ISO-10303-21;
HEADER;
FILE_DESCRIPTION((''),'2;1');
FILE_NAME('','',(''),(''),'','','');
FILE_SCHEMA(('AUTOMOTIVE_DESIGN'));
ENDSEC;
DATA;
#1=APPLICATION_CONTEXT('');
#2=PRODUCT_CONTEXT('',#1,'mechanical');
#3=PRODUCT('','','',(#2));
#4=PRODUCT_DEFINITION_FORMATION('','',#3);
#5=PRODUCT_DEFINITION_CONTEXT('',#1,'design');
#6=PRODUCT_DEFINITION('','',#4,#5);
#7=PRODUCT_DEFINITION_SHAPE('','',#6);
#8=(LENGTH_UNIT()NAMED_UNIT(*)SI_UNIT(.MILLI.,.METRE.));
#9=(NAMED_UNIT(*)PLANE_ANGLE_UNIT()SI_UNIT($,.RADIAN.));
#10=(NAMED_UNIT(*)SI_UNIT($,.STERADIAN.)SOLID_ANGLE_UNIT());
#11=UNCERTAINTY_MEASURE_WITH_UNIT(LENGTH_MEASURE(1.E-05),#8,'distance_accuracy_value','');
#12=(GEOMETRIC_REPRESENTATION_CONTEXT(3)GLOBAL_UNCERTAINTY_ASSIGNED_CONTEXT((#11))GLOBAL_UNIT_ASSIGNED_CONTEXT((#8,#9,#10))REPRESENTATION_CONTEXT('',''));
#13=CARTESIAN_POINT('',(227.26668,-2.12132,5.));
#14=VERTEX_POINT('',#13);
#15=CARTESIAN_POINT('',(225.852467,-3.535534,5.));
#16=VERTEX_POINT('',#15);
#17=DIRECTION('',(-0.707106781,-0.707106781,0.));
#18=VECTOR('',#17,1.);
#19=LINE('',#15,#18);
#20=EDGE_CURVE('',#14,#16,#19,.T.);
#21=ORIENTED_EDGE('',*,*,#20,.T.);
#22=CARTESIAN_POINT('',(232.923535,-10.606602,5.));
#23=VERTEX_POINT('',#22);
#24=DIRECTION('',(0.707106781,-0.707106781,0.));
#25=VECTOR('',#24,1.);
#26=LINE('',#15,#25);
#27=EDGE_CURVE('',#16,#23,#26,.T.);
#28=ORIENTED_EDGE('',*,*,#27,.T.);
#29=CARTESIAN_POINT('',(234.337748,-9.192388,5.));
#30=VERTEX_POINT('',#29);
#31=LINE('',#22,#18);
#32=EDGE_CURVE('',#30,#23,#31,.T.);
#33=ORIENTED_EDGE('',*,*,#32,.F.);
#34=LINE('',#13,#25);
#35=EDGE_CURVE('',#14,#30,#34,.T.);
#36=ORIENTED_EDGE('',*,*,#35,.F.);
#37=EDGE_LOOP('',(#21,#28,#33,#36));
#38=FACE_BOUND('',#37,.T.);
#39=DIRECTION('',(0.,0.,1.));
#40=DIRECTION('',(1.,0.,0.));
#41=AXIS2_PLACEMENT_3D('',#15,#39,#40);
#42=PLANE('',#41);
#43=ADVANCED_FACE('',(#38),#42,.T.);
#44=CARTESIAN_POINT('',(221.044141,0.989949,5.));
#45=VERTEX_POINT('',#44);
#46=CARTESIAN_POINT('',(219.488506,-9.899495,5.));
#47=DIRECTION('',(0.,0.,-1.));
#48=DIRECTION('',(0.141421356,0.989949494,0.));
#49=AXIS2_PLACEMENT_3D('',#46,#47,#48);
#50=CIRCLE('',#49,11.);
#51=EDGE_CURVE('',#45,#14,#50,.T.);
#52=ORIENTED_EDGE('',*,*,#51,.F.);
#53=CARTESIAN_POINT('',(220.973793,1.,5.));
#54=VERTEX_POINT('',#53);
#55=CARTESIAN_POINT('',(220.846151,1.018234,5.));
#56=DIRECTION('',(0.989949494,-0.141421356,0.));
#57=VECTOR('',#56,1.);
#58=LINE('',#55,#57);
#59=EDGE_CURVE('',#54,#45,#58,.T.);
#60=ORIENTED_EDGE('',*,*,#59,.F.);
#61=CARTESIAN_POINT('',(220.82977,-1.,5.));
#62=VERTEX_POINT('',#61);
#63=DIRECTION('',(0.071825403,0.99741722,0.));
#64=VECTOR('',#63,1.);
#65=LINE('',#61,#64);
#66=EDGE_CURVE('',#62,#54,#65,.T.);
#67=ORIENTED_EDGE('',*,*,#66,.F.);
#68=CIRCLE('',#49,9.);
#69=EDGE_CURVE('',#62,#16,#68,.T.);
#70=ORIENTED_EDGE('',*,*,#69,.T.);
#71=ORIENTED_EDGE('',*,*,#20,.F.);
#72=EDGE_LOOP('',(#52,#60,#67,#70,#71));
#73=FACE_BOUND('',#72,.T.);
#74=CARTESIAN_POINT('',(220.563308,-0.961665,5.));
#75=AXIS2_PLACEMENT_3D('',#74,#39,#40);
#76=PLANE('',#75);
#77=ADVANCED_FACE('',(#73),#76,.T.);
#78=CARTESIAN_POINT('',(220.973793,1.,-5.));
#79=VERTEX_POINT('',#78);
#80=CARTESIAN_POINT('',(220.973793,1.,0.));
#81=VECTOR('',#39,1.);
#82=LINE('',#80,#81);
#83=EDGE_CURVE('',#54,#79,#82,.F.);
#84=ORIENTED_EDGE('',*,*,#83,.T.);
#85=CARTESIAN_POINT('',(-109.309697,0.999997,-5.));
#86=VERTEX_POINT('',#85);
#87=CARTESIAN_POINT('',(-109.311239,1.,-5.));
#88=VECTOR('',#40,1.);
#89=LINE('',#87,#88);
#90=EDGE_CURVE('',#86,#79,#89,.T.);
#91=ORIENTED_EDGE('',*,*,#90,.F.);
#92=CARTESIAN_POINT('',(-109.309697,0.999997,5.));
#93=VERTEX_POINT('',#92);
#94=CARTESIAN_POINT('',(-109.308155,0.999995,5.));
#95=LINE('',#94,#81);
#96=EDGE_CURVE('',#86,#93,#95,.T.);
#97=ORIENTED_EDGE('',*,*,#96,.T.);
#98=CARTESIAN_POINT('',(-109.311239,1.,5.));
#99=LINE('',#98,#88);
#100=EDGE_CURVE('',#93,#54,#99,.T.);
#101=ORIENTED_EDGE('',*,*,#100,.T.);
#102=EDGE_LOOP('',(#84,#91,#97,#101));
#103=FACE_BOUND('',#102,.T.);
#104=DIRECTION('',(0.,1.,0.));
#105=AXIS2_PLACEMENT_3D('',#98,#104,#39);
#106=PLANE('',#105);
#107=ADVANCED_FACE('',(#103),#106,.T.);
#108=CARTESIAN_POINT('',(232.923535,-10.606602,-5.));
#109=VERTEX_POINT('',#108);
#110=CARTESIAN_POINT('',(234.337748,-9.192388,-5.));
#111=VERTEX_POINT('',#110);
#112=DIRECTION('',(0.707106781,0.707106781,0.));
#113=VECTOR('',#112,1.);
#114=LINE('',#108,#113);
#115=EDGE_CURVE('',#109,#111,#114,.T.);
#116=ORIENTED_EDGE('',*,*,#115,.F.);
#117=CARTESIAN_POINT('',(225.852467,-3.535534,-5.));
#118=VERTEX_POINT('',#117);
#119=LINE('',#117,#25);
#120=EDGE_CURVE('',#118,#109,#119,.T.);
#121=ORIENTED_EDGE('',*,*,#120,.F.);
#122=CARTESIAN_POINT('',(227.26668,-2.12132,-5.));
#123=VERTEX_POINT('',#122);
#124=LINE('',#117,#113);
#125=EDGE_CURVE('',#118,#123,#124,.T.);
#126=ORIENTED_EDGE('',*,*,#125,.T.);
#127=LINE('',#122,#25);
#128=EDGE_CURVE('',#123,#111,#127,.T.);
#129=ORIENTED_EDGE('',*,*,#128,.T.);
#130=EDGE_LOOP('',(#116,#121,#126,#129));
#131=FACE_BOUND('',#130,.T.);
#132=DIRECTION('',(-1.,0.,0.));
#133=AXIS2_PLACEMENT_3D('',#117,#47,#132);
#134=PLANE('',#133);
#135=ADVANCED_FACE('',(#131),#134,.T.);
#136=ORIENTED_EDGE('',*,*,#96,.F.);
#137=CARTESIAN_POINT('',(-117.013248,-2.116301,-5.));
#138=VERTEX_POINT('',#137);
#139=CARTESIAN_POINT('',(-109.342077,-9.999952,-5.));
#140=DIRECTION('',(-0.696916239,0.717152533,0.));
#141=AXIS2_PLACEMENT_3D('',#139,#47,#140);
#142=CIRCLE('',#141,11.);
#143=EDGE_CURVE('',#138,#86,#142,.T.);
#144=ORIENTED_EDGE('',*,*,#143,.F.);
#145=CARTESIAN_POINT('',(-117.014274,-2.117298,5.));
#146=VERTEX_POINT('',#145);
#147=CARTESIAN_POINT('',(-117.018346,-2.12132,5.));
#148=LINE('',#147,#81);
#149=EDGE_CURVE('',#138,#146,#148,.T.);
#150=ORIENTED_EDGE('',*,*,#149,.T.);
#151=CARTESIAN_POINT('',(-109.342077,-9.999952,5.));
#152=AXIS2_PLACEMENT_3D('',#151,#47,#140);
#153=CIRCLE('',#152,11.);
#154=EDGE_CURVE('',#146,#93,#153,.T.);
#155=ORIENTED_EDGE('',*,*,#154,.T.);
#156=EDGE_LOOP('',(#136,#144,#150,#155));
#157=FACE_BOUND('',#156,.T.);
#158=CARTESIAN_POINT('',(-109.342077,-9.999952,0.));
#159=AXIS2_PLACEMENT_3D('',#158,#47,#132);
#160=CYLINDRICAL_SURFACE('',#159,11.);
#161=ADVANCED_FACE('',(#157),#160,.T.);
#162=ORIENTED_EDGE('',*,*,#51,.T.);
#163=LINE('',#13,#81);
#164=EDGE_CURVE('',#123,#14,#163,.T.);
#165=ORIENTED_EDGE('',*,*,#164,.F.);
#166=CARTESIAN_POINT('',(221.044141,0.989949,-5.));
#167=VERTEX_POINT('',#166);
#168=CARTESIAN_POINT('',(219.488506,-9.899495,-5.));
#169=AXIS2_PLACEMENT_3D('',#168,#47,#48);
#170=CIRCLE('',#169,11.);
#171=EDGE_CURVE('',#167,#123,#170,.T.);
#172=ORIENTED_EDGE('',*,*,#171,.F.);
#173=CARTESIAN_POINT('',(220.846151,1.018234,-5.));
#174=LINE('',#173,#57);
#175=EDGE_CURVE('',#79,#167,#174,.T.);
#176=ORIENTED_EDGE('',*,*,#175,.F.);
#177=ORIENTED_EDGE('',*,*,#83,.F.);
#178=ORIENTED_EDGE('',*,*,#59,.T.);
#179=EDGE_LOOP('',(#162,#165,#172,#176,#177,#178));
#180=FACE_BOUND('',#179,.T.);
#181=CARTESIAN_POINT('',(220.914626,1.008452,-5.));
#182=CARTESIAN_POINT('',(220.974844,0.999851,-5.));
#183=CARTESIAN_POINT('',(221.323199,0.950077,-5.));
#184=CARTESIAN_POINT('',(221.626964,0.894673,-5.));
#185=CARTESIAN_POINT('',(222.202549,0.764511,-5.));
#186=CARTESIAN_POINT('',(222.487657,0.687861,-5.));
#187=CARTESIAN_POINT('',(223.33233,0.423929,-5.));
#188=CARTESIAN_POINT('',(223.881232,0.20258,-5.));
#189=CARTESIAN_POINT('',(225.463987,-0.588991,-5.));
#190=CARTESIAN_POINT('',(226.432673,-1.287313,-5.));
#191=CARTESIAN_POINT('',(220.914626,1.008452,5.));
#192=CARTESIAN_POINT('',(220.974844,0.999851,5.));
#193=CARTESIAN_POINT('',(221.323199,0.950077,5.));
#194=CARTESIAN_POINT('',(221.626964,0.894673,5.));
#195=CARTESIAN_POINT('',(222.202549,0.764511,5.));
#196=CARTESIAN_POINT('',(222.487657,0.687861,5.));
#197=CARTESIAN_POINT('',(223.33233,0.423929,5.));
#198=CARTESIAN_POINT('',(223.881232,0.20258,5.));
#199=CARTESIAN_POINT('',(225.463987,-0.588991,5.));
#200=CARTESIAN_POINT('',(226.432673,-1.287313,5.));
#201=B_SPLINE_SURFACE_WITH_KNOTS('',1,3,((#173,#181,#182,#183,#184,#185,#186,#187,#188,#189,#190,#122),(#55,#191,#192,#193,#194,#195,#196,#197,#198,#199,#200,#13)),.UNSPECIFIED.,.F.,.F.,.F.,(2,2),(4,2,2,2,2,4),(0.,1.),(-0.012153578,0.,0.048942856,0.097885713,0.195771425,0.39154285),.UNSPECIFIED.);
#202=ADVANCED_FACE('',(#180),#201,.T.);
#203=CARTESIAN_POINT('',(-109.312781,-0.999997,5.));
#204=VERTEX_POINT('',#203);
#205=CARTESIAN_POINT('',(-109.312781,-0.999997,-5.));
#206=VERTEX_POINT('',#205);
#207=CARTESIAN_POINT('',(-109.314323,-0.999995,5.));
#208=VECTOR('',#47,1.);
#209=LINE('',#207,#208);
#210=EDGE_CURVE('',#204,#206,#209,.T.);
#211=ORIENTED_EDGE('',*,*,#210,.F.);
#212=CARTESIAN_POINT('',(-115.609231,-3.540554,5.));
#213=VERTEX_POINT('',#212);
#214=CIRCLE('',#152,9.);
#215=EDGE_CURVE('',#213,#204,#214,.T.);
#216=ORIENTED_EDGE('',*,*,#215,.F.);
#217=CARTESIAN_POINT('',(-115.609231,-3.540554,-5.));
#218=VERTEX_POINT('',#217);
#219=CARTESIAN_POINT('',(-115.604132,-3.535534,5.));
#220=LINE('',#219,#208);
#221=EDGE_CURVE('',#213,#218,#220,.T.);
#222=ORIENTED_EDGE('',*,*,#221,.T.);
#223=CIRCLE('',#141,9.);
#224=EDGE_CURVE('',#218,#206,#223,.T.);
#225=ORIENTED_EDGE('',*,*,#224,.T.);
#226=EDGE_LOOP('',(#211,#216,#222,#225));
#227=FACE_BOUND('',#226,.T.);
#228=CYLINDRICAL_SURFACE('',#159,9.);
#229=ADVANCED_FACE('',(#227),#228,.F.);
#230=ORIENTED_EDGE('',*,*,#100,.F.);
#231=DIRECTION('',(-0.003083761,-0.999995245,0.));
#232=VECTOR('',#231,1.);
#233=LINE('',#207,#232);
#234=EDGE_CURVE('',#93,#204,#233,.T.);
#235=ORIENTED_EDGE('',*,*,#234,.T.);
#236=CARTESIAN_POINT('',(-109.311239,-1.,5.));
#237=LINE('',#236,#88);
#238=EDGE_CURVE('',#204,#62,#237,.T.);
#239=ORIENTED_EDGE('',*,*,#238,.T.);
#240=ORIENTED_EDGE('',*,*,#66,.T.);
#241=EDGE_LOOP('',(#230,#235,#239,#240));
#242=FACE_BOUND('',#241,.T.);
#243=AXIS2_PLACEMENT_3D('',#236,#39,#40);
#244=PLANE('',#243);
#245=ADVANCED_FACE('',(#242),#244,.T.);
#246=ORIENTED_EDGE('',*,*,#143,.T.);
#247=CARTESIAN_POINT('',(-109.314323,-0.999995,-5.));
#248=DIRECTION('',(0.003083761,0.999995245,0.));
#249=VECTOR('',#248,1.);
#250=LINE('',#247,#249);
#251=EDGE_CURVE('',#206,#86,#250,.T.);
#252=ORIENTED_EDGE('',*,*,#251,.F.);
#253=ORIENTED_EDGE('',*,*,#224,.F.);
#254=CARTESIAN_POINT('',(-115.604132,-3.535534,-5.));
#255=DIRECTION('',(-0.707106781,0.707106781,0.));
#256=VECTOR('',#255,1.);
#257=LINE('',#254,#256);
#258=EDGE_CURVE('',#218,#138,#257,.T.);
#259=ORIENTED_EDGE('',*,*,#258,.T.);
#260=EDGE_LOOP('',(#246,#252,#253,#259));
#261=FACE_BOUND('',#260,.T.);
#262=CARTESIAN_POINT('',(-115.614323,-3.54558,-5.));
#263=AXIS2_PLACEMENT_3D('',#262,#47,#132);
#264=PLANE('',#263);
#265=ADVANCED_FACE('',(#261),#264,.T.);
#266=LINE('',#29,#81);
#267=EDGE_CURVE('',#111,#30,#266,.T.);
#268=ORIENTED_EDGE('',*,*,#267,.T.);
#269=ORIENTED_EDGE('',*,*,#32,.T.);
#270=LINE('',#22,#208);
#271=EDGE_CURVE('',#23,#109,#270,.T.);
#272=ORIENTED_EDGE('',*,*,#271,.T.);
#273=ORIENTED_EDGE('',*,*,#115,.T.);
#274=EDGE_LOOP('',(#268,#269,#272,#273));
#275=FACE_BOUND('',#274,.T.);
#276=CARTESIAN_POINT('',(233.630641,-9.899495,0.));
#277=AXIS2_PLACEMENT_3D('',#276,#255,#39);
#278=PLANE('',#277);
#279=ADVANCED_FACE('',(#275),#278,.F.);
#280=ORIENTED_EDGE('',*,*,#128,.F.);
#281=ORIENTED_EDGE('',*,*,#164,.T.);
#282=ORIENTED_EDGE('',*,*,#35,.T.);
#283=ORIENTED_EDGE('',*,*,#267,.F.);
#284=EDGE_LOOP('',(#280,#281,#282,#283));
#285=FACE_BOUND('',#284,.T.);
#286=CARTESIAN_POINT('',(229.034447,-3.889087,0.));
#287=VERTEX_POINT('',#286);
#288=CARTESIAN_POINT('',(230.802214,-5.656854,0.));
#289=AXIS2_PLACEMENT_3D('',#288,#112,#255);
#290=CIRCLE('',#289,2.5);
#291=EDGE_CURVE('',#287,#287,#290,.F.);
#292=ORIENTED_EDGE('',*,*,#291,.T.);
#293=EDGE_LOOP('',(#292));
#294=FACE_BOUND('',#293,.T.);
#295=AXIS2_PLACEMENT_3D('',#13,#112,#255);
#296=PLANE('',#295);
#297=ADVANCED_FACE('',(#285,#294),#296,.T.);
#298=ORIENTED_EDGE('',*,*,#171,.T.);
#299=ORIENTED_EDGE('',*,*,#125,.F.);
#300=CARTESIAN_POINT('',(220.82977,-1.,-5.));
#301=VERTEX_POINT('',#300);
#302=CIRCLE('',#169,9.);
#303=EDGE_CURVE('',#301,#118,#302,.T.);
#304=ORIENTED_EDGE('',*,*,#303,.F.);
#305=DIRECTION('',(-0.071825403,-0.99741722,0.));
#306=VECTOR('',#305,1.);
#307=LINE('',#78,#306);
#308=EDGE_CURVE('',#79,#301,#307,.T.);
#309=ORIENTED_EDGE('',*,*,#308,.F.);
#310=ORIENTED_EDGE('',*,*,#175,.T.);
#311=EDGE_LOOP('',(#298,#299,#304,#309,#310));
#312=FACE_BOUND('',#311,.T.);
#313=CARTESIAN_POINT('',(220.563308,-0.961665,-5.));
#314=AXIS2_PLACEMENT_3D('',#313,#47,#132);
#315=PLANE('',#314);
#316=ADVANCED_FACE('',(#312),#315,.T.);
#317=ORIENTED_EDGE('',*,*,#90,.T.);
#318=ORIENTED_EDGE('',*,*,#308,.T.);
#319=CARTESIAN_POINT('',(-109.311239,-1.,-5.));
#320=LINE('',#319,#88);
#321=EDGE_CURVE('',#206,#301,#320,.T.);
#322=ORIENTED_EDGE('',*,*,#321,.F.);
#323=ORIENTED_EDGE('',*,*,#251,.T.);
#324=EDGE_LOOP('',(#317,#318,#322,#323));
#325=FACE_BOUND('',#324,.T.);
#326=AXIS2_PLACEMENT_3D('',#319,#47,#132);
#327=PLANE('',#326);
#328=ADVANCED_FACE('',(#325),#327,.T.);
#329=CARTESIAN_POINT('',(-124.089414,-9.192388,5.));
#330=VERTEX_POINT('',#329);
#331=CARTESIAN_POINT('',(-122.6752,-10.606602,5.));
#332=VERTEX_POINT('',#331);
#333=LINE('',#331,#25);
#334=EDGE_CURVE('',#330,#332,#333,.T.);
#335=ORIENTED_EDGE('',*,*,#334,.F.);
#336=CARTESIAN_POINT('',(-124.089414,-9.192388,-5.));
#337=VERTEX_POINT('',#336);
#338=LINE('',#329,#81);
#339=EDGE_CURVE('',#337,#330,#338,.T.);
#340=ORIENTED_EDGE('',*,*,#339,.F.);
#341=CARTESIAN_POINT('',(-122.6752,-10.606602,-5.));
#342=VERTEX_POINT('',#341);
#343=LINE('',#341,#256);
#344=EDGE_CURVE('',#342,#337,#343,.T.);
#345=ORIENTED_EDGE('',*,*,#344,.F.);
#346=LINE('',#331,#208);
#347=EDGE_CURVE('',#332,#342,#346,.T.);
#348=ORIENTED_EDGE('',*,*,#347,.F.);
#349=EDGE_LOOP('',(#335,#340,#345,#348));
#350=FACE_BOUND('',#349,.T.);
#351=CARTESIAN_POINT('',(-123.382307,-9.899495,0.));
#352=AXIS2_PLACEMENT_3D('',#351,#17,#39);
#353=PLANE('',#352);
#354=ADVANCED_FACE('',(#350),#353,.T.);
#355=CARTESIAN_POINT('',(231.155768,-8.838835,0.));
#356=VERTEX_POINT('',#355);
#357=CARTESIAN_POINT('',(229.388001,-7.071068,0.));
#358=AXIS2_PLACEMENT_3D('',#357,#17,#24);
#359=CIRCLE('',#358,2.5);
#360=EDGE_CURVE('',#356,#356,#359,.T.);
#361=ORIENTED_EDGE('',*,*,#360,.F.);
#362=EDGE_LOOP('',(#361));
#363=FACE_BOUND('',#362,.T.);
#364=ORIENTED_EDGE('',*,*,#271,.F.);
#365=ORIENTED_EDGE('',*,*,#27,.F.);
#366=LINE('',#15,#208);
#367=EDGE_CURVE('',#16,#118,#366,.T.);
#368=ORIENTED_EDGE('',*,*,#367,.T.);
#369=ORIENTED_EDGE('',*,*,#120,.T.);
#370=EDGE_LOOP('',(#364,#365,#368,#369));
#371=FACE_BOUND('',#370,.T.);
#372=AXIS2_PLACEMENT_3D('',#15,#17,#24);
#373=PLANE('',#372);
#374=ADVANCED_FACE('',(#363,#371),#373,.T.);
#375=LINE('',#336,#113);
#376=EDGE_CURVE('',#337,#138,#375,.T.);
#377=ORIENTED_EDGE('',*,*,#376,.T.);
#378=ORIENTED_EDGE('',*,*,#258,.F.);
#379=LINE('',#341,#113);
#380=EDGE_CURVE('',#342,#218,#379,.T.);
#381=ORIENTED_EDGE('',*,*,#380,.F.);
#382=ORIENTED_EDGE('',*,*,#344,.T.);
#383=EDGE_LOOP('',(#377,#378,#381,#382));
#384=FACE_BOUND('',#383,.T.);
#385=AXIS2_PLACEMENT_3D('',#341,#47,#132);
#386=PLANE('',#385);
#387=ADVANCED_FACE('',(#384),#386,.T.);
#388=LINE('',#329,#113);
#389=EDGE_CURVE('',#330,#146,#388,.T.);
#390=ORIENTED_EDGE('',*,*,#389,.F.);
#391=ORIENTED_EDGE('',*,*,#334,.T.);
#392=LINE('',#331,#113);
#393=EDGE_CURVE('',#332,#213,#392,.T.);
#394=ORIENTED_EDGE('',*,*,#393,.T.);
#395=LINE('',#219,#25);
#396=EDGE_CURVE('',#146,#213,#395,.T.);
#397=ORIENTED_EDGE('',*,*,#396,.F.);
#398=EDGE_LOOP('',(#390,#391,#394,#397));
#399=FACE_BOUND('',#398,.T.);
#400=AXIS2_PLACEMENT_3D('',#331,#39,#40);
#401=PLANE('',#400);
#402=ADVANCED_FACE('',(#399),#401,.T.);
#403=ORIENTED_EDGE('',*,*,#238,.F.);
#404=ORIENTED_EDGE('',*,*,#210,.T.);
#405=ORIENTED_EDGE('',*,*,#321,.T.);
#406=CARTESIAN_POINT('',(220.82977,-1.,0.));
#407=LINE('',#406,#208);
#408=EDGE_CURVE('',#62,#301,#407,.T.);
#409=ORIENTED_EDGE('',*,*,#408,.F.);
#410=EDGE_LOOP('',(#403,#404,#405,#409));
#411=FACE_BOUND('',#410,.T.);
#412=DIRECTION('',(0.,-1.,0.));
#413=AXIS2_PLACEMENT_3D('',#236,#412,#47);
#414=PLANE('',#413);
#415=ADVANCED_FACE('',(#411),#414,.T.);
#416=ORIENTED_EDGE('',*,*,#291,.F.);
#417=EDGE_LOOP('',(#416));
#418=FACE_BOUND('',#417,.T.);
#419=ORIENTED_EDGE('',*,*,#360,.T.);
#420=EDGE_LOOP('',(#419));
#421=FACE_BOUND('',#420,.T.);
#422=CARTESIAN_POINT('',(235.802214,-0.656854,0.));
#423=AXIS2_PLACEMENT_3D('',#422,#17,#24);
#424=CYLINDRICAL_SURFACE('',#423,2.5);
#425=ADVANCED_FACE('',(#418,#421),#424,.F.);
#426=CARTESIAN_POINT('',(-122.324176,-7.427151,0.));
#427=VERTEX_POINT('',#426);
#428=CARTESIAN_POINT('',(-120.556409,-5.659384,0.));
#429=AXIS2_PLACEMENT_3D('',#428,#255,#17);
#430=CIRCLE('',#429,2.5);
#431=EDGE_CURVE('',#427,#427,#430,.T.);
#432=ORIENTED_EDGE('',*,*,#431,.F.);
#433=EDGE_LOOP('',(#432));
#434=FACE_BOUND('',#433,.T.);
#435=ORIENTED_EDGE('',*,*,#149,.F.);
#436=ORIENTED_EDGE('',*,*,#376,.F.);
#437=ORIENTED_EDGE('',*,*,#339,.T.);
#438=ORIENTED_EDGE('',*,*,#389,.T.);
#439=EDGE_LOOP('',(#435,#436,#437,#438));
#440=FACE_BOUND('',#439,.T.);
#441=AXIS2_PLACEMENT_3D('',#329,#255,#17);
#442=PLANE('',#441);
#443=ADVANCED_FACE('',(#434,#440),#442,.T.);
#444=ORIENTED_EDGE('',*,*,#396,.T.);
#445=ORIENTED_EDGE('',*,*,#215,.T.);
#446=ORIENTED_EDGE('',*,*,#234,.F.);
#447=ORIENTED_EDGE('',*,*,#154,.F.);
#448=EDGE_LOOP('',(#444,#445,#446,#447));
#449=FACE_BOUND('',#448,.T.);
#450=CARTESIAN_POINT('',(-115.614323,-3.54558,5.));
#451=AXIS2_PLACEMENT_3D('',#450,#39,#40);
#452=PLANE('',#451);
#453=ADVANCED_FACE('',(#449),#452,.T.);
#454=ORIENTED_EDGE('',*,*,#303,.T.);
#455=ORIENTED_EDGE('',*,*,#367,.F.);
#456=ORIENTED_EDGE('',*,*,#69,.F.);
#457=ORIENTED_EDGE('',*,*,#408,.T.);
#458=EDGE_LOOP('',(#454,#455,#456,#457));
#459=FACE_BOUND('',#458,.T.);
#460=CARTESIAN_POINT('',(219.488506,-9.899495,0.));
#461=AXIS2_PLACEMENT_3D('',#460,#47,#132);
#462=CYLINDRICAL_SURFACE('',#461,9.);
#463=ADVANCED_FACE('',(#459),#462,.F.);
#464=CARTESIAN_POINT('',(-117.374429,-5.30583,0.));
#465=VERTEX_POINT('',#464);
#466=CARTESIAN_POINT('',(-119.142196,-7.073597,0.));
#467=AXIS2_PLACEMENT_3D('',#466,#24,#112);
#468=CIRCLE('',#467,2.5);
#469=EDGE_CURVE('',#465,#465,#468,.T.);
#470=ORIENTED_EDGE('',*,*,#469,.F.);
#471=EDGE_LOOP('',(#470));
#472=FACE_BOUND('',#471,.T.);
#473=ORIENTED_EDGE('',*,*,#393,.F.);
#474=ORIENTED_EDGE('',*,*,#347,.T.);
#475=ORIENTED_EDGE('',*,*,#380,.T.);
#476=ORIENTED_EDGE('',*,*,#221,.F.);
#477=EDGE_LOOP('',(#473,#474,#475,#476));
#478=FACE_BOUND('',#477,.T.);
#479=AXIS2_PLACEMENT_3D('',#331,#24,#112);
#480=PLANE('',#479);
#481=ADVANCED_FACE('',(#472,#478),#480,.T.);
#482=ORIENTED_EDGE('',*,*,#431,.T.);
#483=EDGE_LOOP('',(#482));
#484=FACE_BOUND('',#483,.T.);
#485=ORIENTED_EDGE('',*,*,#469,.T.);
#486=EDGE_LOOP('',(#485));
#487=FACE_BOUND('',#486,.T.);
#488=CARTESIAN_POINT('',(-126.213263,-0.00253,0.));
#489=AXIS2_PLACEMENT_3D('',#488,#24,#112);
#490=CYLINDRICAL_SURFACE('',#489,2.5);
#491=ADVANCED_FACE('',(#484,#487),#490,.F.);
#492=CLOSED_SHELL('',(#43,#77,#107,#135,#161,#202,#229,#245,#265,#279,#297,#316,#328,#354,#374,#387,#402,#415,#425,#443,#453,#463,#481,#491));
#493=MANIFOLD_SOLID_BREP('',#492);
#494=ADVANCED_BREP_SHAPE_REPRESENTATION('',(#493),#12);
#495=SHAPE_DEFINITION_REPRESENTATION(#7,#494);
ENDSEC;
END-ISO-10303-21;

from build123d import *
from OCP.BRepAlgoAPI import BRepAlgoAPI_Cut
from OCP.TopTools import TopTools_ListOfShape

# Parameters (mm, degrees)
SWEEP1_START       = -5
SWEEP1_DEPTH       = 10
SKETCH3_R          = 2.5
CUT_EXTRUDE1_DEPTH = 10
SKETCH6_R          = 2.5
CUT_EXTRUDE2_DEPTH = 2


with BuildPart() as part:
    # Sweep1: read off the stored shape, not the designer's step
    # Sweep1 outline → Sweep1 (new body)
    with BuildSketch(Plane.XY.offset(SWEEP1_START)):
        with BuildLine():
            Line((232.923534553, -10.606601718), (234.337748115, -9.192388155))
            Line((234.337748115, -9.192388155), (227.266680303, -2.121320344))
            add(Edge.make_bspline(
                [(220.973792806, 1.000000004), (220.996623613, 0.996738482), (221.019823203, 0.993424062), (221.32319859, 0.950076613), (221.626964068, 0.894672744), (222.202549229, 0.764511245), (222.487656849, 0.687861068), (223.332329716, 0.423928716), (223.881232147, 0.202580142), (225.463987163, -0.588990805), (226.43267267, -1.28731271), (227.266680303, -2.121320344)],
                knots=[-0.004264936, -0.004264936, -0.004264936, -0.004264936, 0, 0, 0.048942856, 0.048942856, 0.097885713, 0.097885713, 0.195771425, 0.195771425, 0.39154285, 0.39154285, 0.39154285, 0.39154285], degree=3))
            Line((220.973792806, 1.000000004), (-109.309697151, 0.999999892))
            ThreePointArc((-109.309697151, 0.999999892), (-113.470401554, 0.195974843), (-117.018410768, -2.121253679))
            Line((-117.018410768, -2.121253679), (-124.089413627, -9.192388155))
            Line((-124.089413627, -9.192388155), (-122.675200065, -10.606601718))
            Line((-122.675200065, -10.606601718), (-115.609189907, -3.540595572))
            ThreePointArc((-115.609189907, -3.540595572), (-112.70975362, -1.653770585), (-109.312780923, -1.000000132))
            Line((-109.312780923, -1.000000132), (220.829769992, -1))
            ThreePointArc((220.829769992, -1), (223.54434808, -1.865184594), (225.852466741, -3.535533906))
            Line((225.852466741, -3.535533906), (232.923534553, -10.606601718))
        make_face()
    extrude(amount=SWEEP1_DEPTH)


with BuildPart() as cut_extrude1_tool:
    # Sketch3 → Cut-Extrude1 (new body)
    with BuildSketch(Plane(origin=(-56.034299174, 56.034299174, 0), x_dir=(0, 0, -1), z_dir=(0.7071067811865286, -0.7071067811865666, 0))):
        with Locations(Location((0, -89.248043129, 0), (0, 0, 90))):
            Circle(SKETCH3_R)
    extrude(amount=-CUT_EXTRUDE1_DEPTH)


with BuildPart() as part_1:
    add(part.part)

    # Cut-Extrude1: cut by cut_extrude1_tool, with a tolerance
    cut_extrude1_stock = TopTools_ListOfShape()
    cut_extrude1_stock.Append(part_1.part.wrapped)
    cut_extrude1_tools = TopTools_ListOfShape()
    cut_extrude1_tools.Append(cut_extrude1_tool.part.wrapped)
    cut_extrude1_cut = BRepAlgoAPI_Cut()
    cut_extrude1_cut.SetArguments(cut_extrude1_stock)
    cut_extrude1_cut.SetTools(cut_extrude1_tools)
    cut_extrude1_cut.SetFuzzyValue(0.00001)
    cut_extrude1_cut.Build()
    add(Compound.cast(cut_extrude1_cut.Shape()).solids(), mode=Mode.REPLACE)

    # Sketch6 → Cut-Extrude2 (cut)
    with BuildSketch(Plane(origin=(111.158466417, 111.158466417, 0), x_dir=(0, 0, 1), z_dir=(-0.7071067811865477, -0.7071067811865475, 0))):
        with Locations(Location((0, -167.20181078, 0), (0, 0, 270))):
            Circle(SKETCH6_R)
    extrude(amount=-CUT_EXTRUDE2_DEPTH, mode=Mode.SUBTRACT)


solid = part_1.part
